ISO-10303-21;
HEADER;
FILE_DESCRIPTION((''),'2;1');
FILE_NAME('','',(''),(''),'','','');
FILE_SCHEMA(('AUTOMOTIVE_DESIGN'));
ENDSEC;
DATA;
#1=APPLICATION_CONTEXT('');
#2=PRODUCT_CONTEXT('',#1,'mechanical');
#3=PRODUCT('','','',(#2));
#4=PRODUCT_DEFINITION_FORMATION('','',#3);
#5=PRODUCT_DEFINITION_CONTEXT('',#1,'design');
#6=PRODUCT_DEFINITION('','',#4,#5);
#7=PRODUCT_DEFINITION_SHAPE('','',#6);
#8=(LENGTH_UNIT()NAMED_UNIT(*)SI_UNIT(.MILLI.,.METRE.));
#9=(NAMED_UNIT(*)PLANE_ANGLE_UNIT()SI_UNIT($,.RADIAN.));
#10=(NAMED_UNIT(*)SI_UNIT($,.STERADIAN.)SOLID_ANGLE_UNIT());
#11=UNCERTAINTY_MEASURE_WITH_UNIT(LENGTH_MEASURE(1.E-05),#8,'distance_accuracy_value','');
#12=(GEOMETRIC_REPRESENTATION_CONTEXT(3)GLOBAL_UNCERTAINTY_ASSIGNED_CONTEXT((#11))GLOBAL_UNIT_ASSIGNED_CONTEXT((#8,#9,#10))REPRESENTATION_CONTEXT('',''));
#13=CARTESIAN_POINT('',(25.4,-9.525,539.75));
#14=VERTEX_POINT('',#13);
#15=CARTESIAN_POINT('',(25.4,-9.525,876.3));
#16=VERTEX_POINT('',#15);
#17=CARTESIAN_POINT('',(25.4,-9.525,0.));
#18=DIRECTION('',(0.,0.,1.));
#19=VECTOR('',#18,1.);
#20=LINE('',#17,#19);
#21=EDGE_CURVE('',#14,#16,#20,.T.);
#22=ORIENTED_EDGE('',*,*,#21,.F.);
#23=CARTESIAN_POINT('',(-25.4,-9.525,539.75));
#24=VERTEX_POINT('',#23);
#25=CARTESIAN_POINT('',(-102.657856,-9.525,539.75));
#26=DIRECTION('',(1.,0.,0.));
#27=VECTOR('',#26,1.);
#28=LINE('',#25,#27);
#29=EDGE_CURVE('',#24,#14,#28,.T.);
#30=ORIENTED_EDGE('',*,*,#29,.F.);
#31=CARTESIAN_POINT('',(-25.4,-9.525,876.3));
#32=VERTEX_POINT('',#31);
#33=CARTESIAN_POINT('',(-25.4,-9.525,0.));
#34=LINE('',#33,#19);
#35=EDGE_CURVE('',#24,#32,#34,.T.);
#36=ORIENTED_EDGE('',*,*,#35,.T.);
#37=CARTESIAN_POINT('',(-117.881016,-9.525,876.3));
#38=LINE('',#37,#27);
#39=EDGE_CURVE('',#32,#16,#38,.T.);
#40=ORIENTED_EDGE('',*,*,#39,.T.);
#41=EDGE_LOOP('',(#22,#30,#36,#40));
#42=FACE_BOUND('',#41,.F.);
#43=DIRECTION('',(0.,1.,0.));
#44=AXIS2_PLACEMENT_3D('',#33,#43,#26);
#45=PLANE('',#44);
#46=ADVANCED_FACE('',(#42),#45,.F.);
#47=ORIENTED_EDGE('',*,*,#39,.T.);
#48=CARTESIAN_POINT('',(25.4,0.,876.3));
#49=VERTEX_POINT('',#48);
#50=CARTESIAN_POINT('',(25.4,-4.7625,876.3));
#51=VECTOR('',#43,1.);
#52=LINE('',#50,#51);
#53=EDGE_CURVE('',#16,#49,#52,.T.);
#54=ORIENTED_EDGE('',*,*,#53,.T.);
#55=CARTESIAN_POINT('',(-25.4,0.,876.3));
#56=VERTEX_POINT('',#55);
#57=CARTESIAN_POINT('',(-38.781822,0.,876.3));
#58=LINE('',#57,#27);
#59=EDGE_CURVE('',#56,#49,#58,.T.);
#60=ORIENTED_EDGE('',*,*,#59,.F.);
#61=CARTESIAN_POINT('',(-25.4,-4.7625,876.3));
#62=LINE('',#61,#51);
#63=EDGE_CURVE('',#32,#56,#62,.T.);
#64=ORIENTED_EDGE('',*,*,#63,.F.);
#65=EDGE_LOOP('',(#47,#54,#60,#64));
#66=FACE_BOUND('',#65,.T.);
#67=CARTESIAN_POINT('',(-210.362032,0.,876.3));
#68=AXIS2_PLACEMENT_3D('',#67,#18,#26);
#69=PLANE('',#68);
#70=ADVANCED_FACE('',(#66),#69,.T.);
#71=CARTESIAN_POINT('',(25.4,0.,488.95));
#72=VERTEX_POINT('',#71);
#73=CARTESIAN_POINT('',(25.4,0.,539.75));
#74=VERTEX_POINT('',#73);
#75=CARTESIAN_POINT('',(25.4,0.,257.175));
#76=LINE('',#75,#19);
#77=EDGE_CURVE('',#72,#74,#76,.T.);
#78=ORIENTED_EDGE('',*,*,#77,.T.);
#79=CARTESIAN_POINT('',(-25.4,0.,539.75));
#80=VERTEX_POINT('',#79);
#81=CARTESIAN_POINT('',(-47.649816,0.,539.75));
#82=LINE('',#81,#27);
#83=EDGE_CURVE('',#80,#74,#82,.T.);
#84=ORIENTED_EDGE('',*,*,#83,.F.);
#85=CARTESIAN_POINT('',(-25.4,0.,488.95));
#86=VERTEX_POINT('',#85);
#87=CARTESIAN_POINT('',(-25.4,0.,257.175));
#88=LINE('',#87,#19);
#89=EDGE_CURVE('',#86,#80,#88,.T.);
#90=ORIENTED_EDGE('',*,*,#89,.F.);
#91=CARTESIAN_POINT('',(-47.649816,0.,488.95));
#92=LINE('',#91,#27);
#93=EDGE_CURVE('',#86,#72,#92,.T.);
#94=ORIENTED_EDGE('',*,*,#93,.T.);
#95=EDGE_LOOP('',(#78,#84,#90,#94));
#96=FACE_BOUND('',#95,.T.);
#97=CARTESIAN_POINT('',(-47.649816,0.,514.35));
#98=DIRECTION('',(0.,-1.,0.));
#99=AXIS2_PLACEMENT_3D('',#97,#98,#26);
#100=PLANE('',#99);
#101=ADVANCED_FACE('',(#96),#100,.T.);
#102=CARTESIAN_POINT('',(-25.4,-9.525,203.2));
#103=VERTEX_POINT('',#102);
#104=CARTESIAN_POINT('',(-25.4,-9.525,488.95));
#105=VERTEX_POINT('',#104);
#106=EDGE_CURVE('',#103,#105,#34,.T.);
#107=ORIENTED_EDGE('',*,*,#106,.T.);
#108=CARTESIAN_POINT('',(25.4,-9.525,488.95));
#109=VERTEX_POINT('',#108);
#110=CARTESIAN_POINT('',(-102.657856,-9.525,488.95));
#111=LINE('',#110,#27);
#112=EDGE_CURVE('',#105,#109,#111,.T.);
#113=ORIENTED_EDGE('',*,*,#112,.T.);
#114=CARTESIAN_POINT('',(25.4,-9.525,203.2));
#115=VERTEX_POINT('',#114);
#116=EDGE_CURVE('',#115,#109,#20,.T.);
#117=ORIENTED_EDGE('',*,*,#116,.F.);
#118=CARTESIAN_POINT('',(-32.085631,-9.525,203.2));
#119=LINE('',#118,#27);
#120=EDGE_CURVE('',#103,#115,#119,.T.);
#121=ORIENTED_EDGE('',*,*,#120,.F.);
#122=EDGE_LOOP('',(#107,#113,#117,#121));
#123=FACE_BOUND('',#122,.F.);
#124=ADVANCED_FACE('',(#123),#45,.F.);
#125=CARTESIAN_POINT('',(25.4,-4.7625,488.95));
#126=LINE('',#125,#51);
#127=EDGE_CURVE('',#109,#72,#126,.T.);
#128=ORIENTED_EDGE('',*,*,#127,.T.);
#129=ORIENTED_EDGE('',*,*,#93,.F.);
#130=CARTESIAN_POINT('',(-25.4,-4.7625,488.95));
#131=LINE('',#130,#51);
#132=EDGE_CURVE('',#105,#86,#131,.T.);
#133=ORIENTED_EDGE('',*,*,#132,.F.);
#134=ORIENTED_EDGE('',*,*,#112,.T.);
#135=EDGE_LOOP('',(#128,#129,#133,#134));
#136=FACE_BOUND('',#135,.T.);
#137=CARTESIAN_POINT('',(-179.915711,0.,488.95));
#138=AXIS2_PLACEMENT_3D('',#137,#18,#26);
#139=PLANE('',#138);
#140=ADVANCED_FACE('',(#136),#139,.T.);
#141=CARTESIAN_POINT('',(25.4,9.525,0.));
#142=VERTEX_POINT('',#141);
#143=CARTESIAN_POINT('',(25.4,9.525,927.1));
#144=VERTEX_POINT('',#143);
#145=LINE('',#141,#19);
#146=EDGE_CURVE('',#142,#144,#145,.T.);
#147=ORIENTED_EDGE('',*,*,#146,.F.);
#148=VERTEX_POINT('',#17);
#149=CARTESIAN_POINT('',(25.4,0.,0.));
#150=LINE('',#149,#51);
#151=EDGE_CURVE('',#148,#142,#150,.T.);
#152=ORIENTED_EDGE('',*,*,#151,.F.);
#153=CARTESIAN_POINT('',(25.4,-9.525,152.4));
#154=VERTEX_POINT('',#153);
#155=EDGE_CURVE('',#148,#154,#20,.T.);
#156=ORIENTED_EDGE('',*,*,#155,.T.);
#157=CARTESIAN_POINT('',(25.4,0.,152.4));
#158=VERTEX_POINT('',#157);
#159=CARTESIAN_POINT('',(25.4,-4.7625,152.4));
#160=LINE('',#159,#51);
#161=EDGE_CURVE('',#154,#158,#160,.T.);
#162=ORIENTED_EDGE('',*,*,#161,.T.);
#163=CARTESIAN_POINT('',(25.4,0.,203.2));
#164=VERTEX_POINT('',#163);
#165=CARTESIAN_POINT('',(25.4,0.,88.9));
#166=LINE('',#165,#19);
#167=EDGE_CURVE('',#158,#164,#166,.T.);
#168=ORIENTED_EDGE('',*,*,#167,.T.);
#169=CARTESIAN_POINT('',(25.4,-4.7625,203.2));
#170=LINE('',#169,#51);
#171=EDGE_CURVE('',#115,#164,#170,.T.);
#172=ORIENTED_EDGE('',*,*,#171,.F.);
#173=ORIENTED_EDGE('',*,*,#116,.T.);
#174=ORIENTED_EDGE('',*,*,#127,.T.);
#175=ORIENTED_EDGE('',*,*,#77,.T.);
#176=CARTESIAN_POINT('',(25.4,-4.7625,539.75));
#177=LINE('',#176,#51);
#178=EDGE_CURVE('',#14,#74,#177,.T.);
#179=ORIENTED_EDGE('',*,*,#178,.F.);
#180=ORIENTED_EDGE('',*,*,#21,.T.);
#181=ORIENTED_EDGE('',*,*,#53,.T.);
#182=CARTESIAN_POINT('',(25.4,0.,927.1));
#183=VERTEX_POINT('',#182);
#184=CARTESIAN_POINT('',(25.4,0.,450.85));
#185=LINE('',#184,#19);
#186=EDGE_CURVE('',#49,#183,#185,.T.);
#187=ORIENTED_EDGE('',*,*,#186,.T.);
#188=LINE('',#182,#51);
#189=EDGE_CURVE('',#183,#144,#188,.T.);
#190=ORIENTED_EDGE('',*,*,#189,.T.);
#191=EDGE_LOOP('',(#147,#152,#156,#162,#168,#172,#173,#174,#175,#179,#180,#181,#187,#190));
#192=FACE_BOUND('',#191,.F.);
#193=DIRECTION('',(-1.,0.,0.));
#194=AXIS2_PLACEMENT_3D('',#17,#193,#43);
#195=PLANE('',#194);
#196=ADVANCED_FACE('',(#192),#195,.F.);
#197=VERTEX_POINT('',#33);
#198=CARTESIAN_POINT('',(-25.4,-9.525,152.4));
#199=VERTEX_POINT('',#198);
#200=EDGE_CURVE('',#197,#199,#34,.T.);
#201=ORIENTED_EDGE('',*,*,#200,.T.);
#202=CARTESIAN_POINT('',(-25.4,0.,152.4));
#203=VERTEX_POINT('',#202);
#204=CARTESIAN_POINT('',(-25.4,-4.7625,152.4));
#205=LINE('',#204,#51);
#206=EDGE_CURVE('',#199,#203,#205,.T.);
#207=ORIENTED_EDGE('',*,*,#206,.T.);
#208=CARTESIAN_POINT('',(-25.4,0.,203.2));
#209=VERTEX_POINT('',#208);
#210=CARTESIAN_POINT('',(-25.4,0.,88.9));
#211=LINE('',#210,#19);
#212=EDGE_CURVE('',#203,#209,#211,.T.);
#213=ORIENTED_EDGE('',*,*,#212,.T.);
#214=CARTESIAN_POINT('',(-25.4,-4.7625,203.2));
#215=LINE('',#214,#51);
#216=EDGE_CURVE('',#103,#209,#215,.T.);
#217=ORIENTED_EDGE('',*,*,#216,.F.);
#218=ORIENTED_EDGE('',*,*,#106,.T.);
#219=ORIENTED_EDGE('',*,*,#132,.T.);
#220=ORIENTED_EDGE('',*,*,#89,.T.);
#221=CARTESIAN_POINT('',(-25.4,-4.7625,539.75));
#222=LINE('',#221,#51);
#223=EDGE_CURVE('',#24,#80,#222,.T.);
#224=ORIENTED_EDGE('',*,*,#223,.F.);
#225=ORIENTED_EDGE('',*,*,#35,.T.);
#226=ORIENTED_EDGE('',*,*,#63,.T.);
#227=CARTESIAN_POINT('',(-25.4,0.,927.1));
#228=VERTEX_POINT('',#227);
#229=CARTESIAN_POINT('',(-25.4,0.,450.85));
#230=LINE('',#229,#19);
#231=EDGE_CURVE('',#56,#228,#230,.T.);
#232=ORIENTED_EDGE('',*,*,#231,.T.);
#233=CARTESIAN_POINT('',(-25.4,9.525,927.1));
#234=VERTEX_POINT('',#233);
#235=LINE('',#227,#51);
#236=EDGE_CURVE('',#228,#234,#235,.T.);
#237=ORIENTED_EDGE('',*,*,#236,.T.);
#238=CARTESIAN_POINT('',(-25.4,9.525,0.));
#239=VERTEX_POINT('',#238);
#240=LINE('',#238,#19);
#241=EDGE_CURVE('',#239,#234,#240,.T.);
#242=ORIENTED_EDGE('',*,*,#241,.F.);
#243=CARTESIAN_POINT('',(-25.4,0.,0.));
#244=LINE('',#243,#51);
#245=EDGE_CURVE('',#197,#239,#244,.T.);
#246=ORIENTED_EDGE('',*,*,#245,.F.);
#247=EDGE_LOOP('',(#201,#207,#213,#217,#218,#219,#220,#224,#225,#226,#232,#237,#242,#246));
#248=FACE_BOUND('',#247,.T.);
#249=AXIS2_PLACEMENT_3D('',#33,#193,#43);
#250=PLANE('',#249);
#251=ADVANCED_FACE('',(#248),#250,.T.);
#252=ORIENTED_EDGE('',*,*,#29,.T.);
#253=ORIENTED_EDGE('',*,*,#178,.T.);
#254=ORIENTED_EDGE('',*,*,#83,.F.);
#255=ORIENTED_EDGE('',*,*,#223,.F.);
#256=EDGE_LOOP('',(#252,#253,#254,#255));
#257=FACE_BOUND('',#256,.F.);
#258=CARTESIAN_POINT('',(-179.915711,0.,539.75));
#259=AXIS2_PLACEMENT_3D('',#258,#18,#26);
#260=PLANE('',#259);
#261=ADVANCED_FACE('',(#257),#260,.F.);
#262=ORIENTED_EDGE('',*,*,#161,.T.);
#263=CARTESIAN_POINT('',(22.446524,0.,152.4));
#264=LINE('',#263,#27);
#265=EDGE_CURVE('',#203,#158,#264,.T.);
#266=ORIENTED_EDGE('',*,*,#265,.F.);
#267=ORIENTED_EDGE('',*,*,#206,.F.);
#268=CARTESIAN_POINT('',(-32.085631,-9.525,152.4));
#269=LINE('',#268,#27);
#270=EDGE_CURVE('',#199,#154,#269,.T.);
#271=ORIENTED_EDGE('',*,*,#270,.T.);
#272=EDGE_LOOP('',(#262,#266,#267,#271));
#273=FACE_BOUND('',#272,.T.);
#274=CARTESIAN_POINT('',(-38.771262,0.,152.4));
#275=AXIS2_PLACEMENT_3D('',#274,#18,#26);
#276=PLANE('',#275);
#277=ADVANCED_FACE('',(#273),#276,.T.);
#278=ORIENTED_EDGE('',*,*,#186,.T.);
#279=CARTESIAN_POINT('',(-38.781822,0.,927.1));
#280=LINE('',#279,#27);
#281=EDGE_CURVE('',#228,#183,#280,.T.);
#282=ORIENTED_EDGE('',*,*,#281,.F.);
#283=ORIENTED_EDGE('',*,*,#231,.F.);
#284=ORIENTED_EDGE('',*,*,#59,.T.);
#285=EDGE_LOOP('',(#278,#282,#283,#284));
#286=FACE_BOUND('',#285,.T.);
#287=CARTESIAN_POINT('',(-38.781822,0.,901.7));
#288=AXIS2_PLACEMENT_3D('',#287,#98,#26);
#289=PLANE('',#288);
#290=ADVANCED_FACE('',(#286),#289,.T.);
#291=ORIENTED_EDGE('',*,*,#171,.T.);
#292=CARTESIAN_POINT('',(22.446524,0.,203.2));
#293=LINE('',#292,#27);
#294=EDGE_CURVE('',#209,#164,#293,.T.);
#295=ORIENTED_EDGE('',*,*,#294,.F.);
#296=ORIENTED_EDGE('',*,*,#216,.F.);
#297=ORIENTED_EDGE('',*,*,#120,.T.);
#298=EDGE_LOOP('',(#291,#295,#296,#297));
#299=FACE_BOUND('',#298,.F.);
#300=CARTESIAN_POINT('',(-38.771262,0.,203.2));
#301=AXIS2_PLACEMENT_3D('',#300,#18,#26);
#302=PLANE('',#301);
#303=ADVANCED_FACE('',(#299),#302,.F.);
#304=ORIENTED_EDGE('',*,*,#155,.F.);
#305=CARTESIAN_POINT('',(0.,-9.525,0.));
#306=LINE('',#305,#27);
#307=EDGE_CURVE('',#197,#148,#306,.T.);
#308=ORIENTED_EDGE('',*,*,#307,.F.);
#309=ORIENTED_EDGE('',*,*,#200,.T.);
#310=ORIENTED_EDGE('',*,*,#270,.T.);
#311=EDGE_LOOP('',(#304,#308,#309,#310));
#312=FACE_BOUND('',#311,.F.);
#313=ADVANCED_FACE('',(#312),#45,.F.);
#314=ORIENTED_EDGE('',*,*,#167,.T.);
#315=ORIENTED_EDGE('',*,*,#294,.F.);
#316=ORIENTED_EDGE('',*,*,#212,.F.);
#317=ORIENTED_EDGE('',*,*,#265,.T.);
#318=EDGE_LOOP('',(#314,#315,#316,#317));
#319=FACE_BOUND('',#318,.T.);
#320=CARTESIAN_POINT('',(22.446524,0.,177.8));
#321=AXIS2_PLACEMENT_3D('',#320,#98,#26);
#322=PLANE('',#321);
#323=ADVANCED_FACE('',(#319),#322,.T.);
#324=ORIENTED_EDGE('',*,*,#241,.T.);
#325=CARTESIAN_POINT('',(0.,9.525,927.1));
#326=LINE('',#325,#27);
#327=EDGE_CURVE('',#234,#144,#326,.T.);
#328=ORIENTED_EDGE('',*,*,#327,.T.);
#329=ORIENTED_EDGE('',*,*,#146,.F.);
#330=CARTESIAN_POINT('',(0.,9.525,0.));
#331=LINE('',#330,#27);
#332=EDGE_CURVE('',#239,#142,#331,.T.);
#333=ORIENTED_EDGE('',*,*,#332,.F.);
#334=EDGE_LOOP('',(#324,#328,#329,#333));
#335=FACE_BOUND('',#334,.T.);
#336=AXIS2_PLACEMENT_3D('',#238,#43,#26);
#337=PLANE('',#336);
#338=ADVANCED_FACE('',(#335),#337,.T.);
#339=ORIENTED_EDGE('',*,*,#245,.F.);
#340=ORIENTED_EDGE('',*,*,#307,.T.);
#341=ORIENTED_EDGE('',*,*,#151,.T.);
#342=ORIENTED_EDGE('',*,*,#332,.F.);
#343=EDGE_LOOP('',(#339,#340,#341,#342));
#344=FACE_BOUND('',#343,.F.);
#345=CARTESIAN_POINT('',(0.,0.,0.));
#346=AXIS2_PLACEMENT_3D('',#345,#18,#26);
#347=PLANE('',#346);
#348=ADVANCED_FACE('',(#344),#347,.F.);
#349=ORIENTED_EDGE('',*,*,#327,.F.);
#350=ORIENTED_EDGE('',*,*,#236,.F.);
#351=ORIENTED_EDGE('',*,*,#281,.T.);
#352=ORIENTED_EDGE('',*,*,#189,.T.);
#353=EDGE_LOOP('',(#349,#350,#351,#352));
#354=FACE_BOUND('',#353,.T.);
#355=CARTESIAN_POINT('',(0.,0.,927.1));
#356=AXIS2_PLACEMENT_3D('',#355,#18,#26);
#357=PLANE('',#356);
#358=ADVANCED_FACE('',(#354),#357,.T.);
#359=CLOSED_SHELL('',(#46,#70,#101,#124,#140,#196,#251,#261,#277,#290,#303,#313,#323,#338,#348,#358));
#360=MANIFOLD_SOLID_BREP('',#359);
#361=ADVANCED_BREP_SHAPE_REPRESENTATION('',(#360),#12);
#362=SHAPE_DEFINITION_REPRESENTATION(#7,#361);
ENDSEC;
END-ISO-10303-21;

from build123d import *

# Parameters (mm, degrees)
F0_W     = 50.8
F0_H     = 19.05
F1_DEPTH = 927.1
F2_W     = 122.43557321
F2_H     = 50.8
F2_W_2   = 343.1604206562
F2_W_3   = 264.5317912102
F3_DEPTH = 25.4


# Not quite as in the source:
# - a feature names something its author has since deleted; it is built from what else it names


with BuildPart() as f1:
    # F0 (on Top) → F1 (new body)
    with BuildSketch(Plane.XY):
        Rectangle(F0_W, F0_H)
    extrude(amount=F1_DEPTH)

    # F2 (on Front) → F3 (cut)
    with BuildSketch(Plane.XZ):
        with Locations((22.4465244144, 177.8)):
            Rectangle(F2_W, F2_H)
        with Locations((-38.7818217278, 901.7)):
            Rectangle(F2_W_2, F2_H)
        with Locations((-47.6498156786, 514.35)):
            Rectangle(F2_W_3, F2_H)
    extrude(amount=F3_DEPTH, mode=Mode.SUBTRACT)


solid = f1.part
